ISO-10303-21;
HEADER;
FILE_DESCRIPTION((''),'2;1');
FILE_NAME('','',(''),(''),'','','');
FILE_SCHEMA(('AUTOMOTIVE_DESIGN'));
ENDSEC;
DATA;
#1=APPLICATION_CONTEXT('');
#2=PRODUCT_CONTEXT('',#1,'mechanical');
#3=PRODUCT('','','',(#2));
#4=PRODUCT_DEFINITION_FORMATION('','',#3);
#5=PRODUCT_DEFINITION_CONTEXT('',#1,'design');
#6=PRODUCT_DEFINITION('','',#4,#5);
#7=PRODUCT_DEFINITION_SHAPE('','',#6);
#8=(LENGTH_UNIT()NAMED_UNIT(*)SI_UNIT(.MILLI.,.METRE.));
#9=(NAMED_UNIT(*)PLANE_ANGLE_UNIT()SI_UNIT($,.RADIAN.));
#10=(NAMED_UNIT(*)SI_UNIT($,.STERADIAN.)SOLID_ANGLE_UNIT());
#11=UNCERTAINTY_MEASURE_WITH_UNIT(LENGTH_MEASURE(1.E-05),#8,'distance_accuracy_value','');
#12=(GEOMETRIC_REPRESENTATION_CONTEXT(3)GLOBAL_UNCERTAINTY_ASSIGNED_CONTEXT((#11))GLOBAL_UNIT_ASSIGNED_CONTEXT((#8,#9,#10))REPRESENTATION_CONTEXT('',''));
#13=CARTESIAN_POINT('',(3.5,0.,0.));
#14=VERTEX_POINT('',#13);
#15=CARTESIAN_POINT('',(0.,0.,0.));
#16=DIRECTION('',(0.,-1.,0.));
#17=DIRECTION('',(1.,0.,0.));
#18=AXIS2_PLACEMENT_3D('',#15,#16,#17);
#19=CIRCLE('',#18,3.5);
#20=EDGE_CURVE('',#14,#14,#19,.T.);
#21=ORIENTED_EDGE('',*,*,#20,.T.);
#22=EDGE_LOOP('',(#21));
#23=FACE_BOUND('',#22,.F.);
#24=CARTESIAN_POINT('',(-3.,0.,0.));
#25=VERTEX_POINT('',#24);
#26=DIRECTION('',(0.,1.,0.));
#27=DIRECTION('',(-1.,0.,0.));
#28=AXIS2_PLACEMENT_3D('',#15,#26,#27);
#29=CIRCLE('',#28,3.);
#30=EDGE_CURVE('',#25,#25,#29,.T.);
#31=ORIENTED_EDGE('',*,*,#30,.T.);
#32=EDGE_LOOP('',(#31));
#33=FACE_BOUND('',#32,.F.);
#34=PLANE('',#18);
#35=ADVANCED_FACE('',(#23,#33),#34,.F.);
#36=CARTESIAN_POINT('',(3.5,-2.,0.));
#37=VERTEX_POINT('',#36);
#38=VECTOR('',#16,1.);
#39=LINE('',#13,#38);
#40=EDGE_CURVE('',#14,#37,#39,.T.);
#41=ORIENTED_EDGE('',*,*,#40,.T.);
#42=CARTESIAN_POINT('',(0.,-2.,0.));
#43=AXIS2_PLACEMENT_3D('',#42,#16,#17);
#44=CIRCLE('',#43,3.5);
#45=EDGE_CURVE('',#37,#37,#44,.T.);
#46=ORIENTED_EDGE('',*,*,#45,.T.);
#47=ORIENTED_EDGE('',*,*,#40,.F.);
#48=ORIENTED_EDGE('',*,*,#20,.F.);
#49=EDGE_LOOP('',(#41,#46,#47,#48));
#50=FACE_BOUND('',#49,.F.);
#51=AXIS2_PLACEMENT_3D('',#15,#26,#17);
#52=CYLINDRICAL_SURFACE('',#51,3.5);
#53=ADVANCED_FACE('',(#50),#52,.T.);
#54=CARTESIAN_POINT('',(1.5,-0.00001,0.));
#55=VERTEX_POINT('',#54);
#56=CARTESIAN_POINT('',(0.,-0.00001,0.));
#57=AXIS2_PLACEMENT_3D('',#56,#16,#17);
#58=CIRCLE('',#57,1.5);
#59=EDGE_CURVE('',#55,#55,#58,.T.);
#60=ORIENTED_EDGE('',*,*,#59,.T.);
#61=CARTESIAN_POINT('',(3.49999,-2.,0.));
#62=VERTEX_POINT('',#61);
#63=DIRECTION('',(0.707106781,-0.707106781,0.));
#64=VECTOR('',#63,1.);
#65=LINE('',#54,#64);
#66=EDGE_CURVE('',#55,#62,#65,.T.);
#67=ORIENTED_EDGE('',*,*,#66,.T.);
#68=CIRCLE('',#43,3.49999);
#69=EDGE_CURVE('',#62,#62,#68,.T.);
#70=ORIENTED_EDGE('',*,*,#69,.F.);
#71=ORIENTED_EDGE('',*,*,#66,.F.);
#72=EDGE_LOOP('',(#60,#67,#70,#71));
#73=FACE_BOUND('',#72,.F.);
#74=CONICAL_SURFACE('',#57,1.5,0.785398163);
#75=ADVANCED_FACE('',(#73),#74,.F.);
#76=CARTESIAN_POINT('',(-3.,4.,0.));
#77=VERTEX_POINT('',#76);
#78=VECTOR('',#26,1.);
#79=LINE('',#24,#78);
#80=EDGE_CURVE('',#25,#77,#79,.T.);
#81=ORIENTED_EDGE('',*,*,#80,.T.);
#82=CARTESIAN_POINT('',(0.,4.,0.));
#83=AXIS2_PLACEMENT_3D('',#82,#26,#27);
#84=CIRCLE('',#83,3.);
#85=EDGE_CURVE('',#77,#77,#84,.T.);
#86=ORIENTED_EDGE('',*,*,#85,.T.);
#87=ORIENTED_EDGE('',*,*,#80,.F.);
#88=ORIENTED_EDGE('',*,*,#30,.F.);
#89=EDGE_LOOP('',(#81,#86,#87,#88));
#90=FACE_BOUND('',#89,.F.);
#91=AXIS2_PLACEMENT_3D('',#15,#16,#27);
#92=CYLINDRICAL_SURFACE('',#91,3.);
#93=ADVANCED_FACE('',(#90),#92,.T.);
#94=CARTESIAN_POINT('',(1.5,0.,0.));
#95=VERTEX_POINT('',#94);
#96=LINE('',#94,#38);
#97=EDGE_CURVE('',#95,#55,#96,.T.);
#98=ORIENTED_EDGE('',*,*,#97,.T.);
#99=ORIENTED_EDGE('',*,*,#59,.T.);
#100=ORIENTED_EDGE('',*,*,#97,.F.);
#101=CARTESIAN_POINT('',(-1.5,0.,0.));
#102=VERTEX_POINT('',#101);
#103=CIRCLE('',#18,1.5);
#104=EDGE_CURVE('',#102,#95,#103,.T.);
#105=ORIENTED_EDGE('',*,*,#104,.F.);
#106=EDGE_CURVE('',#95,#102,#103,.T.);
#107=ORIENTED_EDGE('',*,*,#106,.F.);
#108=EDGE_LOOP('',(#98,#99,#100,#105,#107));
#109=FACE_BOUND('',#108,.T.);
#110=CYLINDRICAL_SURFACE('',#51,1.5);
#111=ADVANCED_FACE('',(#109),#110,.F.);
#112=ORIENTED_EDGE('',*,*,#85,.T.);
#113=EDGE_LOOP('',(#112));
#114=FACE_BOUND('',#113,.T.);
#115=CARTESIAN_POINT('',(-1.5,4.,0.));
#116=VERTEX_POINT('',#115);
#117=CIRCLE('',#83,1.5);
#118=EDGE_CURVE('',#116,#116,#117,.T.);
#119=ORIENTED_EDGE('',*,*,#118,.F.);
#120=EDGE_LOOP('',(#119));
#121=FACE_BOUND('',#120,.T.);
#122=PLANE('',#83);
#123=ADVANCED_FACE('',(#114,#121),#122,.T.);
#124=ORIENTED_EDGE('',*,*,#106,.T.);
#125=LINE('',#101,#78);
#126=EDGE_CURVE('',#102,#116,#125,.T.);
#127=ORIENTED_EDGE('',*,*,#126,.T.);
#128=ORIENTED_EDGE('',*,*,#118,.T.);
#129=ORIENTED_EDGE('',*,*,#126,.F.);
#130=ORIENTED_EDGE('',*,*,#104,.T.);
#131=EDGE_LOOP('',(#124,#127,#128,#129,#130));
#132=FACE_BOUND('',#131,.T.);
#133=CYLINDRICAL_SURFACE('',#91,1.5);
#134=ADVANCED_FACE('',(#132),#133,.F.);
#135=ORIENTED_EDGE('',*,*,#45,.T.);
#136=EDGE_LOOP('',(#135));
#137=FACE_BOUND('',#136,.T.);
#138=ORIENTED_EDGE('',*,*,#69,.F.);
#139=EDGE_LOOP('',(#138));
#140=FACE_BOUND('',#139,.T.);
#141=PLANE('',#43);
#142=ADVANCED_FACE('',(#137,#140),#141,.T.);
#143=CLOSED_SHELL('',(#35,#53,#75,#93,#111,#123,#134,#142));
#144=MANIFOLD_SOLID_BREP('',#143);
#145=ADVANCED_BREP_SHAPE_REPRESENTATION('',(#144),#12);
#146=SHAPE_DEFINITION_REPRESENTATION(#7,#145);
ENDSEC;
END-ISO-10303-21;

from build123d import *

# Parameters (mm, degrees)
F0_R     = 3.5
F0_R_2   = 1.5
F1_DEPTH = 2
F2_SIZE  = 1.99999
F3_R     = 3
F3_R_2   = 1.5
F4_DEPTH = 4


# Not quite as in the source:
# - a fillet or chamfer is up to 0.001 mm smaller than in the source, because OpenCascade refuses the exact size


with BuildPart() as f1:
    # F0 (on Front) → F1 (new body)
    with BuildSketch(Plane.XZ):
        Circle(F0_R)
        Circle(F0_R_2, mode=Mode.SUBTRACT)
    extrude(amount=F1_DEPTH)

    # F2 (size 2 in the source; OpenCascade refuses exactly that, so slightly less here)
    f2_edges = [f1.edges().sort_by_distance(p)[0] for p in [
        (-1.5, -2, 0),
    ]]
    chamfer(f2_edges, length=F2_SIZE)

    # F3 (on face) → F4 (join)
    with BuildSketch(Plane(origin=(0, 0, 0), x_dir=(-1, 0, 0), z_dir=(0, 1, 0))):
        Circle(F3_R)
        Circle(F3_R_2, mode=Mode.SUBTRACT)
    extrude(amount=F4_DEPTH)


solid = f1.part
